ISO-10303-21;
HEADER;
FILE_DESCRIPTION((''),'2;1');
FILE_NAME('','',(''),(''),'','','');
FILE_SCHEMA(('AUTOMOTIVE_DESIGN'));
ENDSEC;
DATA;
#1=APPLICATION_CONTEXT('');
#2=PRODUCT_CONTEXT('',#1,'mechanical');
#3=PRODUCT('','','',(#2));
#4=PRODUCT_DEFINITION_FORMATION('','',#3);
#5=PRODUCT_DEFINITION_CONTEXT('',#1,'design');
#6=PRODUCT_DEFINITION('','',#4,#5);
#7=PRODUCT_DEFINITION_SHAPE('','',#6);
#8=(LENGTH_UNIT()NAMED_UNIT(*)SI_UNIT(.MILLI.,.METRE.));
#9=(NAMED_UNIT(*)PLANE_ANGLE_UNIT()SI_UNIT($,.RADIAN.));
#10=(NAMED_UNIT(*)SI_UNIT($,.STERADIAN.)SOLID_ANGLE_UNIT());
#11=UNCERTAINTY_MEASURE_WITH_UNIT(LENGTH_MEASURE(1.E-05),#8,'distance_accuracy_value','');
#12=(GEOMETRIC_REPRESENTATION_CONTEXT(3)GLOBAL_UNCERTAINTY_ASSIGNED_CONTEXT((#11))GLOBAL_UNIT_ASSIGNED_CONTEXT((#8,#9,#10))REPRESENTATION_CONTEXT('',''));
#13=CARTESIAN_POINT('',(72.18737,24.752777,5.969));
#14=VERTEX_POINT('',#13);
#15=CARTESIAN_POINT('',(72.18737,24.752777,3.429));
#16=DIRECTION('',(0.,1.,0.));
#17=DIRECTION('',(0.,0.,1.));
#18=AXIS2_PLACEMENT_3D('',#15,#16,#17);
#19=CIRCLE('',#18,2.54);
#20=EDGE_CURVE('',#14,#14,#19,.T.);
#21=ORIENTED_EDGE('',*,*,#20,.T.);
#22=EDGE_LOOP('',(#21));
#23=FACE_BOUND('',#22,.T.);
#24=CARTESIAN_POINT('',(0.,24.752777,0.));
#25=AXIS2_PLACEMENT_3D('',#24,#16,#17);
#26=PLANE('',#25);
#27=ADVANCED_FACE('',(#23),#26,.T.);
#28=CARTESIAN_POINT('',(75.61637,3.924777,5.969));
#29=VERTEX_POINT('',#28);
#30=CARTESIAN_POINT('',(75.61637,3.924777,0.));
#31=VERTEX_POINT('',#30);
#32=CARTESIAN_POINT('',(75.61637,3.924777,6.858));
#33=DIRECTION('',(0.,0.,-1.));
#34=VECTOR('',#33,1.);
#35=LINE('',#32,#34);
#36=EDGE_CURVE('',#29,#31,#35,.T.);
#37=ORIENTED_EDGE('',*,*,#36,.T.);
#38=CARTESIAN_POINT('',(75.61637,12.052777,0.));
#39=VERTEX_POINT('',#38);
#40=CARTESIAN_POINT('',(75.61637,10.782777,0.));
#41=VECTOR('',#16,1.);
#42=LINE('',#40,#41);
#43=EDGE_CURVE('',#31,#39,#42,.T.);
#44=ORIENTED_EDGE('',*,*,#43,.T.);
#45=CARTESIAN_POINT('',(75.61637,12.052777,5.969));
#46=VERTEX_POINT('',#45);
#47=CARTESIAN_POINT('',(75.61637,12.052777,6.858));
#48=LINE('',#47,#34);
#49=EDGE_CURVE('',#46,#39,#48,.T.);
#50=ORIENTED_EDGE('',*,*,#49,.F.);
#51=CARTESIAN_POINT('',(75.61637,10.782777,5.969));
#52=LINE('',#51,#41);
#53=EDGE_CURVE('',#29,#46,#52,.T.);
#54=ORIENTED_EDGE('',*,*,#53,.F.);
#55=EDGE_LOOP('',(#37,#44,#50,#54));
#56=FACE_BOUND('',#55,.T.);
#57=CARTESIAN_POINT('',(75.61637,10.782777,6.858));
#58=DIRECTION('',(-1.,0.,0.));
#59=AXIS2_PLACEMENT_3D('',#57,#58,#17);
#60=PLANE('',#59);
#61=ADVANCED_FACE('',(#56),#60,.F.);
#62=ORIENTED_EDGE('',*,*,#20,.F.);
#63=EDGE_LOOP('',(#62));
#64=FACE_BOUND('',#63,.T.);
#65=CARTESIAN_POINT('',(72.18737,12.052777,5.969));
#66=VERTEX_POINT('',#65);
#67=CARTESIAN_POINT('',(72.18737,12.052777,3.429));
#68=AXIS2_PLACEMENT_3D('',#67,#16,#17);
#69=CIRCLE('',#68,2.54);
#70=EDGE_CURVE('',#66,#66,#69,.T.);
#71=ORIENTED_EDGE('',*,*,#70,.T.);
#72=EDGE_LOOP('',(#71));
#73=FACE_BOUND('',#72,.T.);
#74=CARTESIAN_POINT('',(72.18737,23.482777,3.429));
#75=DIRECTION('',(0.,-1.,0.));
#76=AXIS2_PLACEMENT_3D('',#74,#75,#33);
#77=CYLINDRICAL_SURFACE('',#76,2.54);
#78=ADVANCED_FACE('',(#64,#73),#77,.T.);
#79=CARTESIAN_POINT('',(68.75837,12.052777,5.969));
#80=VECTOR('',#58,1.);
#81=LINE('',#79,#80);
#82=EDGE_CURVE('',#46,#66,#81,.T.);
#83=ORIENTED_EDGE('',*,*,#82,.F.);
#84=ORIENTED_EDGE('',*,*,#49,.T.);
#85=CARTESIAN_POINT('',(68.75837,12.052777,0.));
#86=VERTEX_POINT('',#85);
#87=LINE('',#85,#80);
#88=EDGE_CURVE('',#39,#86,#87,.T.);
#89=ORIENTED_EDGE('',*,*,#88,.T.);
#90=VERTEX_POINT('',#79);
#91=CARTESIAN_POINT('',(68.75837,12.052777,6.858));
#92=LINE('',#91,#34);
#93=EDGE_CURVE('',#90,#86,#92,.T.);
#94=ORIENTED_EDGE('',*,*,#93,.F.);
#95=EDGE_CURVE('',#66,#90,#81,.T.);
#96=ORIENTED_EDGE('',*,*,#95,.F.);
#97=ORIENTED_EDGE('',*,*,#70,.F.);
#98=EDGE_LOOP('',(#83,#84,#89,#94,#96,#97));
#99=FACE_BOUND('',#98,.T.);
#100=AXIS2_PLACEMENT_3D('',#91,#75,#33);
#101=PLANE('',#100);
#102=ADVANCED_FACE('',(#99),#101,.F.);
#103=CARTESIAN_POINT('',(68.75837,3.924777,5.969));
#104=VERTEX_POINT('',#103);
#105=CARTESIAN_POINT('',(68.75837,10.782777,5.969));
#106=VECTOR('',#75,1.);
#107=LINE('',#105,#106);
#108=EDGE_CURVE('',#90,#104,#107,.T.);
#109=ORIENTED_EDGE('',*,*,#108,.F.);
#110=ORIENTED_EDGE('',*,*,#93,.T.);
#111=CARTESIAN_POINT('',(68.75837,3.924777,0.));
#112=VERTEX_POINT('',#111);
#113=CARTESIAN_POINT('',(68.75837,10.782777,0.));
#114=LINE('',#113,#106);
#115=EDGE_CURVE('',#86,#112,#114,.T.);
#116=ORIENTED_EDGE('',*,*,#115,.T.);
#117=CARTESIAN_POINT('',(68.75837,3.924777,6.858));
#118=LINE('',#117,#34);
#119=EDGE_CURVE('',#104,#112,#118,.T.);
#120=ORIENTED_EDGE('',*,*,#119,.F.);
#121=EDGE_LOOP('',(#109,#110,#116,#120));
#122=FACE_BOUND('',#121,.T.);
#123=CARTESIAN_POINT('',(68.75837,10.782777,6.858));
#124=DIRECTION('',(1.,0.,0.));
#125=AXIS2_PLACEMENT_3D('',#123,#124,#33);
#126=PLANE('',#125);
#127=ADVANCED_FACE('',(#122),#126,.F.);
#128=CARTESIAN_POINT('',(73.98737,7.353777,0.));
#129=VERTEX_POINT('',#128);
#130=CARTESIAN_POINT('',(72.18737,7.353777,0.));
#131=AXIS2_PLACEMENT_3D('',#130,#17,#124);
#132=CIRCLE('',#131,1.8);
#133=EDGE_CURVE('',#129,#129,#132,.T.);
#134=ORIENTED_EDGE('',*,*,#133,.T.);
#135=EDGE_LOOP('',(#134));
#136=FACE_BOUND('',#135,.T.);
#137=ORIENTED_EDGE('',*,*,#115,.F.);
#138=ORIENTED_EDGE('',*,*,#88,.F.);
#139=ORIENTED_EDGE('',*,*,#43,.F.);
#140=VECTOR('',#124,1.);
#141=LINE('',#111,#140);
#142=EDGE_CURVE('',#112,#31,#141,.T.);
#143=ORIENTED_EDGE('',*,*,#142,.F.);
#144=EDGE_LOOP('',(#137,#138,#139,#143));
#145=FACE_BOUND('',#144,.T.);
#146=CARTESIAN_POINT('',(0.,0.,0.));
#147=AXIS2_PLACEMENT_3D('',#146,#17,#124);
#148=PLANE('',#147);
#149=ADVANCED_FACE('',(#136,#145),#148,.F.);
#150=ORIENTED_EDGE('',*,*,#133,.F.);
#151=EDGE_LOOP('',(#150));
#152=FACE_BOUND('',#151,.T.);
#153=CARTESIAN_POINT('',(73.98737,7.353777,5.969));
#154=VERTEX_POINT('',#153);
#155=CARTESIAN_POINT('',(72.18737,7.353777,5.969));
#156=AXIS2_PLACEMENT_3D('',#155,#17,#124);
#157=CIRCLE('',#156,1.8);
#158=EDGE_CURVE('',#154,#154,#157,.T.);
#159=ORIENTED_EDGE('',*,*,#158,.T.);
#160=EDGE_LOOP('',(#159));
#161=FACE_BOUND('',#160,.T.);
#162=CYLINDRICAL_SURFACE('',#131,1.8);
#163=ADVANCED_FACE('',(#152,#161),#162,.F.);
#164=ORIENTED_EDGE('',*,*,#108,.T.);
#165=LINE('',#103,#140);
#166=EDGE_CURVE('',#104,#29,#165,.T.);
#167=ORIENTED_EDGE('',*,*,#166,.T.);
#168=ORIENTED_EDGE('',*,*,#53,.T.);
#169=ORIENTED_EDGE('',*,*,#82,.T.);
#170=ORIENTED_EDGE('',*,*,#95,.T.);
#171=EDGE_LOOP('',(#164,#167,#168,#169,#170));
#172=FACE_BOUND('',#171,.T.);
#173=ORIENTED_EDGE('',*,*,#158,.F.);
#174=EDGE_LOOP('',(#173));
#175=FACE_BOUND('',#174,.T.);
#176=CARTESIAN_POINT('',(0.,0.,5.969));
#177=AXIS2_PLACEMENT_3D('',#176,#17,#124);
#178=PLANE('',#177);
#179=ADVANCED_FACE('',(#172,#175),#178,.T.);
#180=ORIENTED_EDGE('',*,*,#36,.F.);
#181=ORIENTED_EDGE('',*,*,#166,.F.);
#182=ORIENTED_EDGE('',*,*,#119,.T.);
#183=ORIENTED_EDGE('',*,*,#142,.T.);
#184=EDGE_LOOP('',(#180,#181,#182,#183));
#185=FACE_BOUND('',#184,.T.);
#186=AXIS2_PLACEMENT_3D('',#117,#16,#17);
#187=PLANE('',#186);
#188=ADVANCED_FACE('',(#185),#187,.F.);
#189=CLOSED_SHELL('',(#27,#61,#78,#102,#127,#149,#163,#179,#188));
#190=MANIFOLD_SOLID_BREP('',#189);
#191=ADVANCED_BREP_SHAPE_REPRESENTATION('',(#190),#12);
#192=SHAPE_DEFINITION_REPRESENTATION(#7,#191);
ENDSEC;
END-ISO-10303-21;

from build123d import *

# Parameters (mm, degrees)
SKETCH1_W            = 6.858
SKETCH1_H            = 6.858
BOSS_EXTRUDE1_DEPTH  = 6.858
CUT_EXTRUDE1_DEPTH   = 6.858
BOSS_EXTRUDE2_DEPTH  = 12.7
MOVE_FACE1_BY        = 0.889
MOVE_START           = 68.758370303
MOVE_FACE2_OUTLINE_W = 1.27
MOVE_FACE2_OUTLINE_H = 5.969
MOVE_FACE2_DEPTH     = 6.858
MOVE_FACE3_BY        = 1.27


# Read off the part's stored shape, not the designer's step: Move Face2
with BuildPart() as part:
    # Sketch1 → Boss-Extrude1 (new body)
    with BuildSketch(Plane.XY):
        with Locations((72.187370303, 7.35377716)):
            Rectangle(SKETCH1_W, SKETCH1_H)
    extrude(amount=BOSS_EXTRUDE1_DEPTH)

    # Sketch3 → Cut-Extrude1 (cut)
    with BuildSketch(Plane.XY.offset(6.858)):
        with BuildLine():
            ThreePointArc((73.987370303, 7.35377716), (72.187370303, 9.15377716), (70.387370303, 7.35377716))
            Line((70.387370303, 7.35377716), (73.987370303, 7.35377716))
        make_face()
        with BuildLine():
            Line((73.987370303, 7.35377716), (70.387370303, 7.35377716))
            ThreePointArc((70.387370303, 7.35377716), (72.187370303, 5.55377716), (73.987370303, 7.35377716))
        make_face()
    extrude(amount=-CUT_EXTRUDE1_DEPTH, mode=Mode.SUBTRACT)

    # Sketch5 → Boss-Extrude2 (add)
    with BuildSketch(Plane(origin=(0, 10.78277716, 0), x_dir=(1, 0, 0), z_dir=(0, 1, 0))):
        with BuildLine():
            ThreePointArc((72.187370303, -0.889), (69.647370303, -3.429), (72.187370303, -5.969))
            Line((72.187370303, -5.969), (72.187370303, -0.889))
        make_face()
        with BuildLine():
            Line((72.187370303, -0.889), (72.187370303, -5.969))
            ThreePointArc((72.187370303, -5.969), (73.983421527, -5.225051224), (74.727370303, -3.429))
            ThreePointArc((74.727370303, -3.429), (73.983421527, -1.632948776), (72.187370303, -0.889))
        make_face()
    extrude(amount=BOSS_EXTRUDE2_DEPTH)

    # Move Face1: a face moved inward by 0.889
    extrude(part.faces().sort_by_distance((72.187370303, 4.61057716, 6.858))[0], amount=MOVE_FACE1_BY, dir=(0, 0, -1), mode=Mode.SUBTRACT)

    # Move Face2 outline → Move Face2 (add)
    with BuildSketch(Plane.YZ.offset(MOVE_START)):
        with Locations((11.41777716, 2.9845)):
            Rectangle(MOVE_FACE2_OUTLINE_W, MOVE_FACE2_OUTLINE_H)
    extrude(amount=MOVE_FACE2_DEPTH)

    # Move Face3: a face moved outward by 1.27
    extrude(part.faces().sort_by_distance((72.187370303, 23.48277716, 3.429))[0], amount=MOVE_FACE3_BY, dir=(0, 1, 0))


solid = part.part
